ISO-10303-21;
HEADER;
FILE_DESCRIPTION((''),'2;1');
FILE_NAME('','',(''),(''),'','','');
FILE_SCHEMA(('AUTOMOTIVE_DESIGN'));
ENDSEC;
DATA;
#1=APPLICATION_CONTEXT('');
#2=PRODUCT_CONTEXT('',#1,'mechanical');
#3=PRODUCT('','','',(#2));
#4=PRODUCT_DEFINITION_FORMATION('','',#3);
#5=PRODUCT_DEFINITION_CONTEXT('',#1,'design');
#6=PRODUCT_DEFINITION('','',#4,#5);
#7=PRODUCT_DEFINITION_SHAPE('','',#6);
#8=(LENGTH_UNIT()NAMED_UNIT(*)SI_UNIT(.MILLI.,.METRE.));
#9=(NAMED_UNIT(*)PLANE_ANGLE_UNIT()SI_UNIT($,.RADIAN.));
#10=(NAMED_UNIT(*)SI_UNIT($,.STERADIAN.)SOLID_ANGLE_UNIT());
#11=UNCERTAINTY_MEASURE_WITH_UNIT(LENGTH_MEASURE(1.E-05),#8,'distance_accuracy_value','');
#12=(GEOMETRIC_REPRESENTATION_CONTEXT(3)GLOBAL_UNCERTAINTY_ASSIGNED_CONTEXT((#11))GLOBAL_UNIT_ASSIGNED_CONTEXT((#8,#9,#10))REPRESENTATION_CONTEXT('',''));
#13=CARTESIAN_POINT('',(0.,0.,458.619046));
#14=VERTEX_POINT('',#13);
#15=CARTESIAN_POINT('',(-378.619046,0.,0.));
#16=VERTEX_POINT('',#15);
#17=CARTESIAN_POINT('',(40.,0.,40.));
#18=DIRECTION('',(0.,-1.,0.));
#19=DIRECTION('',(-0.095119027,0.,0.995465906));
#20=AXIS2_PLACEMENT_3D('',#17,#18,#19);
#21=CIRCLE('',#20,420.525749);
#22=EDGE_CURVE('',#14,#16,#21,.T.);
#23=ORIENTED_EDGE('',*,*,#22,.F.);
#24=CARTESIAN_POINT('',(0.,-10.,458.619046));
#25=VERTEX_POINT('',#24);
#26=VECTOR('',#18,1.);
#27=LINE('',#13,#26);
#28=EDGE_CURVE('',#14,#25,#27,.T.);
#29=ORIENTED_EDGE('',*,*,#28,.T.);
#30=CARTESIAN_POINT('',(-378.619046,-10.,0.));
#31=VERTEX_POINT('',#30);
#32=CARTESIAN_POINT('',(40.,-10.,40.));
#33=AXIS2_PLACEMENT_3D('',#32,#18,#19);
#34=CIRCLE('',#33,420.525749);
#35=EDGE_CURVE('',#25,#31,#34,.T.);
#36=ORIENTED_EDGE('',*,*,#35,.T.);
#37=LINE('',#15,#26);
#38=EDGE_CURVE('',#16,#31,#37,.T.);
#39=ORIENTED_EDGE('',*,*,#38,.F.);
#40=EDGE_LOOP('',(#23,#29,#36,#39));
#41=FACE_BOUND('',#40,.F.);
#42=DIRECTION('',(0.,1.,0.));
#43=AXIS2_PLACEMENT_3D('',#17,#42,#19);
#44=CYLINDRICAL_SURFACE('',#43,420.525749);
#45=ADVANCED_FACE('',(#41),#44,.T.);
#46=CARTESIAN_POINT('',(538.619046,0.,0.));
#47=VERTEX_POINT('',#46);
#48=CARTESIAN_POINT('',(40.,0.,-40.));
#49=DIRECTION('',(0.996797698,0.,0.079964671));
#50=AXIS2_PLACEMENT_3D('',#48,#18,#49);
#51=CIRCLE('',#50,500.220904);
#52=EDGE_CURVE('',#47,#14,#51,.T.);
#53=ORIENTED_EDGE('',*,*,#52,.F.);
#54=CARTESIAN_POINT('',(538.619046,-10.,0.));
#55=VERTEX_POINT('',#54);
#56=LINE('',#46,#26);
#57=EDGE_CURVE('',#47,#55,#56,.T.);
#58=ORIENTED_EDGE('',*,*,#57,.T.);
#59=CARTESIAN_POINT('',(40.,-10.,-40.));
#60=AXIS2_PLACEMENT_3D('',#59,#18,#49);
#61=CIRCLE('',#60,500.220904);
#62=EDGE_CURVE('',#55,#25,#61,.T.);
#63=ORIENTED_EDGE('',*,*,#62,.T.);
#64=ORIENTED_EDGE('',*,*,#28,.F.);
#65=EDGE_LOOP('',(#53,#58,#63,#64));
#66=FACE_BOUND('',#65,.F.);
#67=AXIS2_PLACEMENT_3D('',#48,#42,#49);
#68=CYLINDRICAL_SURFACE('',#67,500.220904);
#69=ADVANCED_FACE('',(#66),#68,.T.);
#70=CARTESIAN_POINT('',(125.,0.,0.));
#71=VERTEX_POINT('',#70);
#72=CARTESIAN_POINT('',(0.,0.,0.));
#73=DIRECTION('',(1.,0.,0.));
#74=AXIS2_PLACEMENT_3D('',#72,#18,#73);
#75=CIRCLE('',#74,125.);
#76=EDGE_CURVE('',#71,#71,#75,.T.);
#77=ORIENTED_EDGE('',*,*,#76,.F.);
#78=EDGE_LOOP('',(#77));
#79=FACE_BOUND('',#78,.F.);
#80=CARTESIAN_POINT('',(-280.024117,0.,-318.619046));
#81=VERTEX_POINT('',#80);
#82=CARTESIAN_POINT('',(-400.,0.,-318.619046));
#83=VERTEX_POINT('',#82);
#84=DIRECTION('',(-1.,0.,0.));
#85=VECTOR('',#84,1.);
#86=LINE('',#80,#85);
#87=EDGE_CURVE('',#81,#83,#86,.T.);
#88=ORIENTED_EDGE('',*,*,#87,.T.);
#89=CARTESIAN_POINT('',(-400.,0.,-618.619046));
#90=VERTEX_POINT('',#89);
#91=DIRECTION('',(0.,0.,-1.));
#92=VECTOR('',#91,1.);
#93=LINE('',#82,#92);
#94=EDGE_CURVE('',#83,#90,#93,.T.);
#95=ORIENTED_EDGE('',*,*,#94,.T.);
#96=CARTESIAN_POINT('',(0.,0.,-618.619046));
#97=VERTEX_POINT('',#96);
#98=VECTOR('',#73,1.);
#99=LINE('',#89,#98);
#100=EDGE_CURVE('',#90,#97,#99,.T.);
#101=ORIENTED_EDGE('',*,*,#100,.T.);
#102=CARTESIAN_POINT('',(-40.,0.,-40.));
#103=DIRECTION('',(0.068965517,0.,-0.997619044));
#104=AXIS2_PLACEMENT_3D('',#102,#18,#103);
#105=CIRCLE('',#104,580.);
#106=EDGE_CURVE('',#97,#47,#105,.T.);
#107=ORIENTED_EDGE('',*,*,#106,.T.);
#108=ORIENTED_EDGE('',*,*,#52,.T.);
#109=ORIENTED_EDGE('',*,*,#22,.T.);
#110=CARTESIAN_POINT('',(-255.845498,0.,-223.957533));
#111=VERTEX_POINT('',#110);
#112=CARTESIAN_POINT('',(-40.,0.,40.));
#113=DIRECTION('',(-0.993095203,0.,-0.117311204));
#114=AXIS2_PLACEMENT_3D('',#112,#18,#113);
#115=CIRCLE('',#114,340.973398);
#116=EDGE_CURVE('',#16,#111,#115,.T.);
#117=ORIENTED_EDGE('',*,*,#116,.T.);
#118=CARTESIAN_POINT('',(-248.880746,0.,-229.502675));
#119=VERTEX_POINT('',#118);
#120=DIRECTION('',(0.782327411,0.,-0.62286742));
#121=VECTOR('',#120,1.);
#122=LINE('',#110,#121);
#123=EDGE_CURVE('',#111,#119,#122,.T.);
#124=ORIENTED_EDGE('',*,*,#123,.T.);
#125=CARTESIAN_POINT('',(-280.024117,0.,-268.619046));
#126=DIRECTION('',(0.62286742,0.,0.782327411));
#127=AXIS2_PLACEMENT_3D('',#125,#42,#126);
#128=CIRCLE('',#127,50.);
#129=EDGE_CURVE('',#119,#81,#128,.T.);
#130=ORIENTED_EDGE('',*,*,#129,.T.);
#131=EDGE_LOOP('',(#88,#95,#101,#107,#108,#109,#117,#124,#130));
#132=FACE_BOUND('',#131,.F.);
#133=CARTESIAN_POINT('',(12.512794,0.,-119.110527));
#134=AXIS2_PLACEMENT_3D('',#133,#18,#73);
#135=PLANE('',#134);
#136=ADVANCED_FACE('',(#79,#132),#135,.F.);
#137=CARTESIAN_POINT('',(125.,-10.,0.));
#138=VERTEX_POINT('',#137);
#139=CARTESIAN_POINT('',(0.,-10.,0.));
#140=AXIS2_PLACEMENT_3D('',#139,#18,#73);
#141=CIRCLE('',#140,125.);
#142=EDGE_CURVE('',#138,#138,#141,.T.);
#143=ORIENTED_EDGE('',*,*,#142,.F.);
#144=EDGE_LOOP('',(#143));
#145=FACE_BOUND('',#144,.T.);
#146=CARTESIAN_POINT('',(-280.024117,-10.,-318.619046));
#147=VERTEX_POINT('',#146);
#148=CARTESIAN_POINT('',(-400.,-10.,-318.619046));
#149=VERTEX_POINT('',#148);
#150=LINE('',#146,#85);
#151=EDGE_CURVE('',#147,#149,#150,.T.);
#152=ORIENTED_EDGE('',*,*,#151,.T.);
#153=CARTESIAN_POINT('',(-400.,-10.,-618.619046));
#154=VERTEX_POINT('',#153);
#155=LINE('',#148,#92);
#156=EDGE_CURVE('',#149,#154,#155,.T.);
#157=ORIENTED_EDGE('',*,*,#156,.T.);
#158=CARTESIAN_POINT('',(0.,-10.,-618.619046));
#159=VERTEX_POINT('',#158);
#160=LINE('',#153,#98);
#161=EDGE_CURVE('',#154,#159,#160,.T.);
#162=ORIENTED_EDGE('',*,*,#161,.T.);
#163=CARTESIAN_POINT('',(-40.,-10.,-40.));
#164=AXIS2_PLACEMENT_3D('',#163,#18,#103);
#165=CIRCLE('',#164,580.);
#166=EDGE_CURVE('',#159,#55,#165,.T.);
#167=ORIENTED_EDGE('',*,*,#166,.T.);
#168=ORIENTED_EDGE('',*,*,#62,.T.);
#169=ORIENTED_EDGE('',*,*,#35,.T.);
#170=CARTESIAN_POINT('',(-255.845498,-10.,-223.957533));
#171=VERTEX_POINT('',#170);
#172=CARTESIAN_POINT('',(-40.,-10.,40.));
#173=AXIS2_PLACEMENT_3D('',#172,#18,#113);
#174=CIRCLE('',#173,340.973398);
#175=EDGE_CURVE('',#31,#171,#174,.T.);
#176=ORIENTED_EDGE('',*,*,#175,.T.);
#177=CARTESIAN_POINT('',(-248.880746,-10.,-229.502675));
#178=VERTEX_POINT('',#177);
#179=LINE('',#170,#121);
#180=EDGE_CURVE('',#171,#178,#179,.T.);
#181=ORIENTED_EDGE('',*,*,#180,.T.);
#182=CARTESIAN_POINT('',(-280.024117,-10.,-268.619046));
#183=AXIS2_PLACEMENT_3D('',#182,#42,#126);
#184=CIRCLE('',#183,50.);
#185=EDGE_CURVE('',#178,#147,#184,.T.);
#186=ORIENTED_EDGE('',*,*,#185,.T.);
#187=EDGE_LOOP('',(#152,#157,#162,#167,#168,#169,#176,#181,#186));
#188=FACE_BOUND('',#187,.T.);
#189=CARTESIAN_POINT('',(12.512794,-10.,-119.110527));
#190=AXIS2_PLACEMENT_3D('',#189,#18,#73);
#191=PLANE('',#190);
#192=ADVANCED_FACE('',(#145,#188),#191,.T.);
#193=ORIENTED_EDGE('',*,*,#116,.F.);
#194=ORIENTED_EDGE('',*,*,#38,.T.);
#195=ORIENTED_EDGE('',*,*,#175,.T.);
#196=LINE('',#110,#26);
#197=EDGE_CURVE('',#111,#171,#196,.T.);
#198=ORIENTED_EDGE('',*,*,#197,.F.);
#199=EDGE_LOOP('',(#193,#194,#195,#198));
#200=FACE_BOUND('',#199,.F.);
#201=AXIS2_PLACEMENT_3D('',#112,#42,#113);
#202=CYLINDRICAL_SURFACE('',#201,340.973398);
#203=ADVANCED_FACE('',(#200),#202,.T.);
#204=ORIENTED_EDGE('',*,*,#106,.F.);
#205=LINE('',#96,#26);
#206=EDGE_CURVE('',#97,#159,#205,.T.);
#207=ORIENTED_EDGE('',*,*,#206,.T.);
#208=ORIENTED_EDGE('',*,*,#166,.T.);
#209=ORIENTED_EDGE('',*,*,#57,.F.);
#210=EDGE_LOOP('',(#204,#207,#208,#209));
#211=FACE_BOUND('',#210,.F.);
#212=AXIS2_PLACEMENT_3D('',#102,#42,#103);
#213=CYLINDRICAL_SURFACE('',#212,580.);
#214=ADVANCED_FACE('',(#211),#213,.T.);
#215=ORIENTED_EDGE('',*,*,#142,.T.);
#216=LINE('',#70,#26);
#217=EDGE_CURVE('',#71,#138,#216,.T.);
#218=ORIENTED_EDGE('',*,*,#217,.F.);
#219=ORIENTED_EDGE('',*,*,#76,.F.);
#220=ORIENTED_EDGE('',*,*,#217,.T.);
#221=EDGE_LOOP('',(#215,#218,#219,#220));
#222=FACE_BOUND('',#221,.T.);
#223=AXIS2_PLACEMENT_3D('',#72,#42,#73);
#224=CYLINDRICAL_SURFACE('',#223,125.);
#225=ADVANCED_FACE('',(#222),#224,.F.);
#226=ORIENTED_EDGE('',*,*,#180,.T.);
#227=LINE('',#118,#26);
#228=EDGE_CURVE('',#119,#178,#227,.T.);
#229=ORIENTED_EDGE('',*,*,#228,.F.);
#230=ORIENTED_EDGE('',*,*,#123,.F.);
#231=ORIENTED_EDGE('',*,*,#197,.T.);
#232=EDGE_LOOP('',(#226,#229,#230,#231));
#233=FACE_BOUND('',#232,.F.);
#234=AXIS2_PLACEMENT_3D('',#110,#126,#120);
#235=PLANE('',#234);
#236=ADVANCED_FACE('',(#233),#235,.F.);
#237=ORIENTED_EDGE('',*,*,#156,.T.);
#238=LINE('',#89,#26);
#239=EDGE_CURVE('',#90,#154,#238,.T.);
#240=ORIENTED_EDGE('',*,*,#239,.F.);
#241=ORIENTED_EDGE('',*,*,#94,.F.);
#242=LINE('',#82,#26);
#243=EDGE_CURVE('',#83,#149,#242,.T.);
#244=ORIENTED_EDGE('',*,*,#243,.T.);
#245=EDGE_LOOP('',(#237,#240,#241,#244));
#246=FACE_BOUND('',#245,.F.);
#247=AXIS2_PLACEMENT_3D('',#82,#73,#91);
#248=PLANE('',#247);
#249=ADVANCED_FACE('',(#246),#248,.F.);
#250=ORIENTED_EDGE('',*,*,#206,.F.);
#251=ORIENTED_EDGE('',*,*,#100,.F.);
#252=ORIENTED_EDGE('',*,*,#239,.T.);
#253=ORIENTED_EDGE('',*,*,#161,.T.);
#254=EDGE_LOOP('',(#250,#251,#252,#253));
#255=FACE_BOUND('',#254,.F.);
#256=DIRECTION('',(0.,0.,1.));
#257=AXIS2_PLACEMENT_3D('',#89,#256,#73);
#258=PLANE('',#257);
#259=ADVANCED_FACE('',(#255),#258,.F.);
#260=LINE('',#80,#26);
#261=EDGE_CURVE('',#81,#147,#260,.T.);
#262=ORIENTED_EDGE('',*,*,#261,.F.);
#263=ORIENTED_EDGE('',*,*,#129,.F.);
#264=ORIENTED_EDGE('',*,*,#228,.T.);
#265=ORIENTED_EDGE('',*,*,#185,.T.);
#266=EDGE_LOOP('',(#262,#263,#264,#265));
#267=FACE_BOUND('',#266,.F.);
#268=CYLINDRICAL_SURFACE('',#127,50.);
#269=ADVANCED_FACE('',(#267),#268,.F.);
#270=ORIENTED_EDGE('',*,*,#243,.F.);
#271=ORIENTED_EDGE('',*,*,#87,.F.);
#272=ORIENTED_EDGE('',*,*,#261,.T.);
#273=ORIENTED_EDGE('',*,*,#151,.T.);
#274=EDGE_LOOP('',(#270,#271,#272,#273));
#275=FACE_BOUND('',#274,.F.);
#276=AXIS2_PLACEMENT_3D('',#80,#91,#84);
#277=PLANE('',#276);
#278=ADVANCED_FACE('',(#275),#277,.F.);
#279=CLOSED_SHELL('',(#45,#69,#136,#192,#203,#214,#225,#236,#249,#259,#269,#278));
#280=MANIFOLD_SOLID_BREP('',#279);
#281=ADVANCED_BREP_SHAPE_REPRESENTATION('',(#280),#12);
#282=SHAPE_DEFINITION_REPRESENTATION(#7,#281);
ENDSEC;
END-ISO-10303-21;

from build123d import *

# Parameters (mm, degrees)
F0_R     = 125
F1_DEPTH = 10


# Not quite as in the source:
# - a feature names something its author has since deleted; it is built from what else it names


with BuildPart() as f1:
    # F0 (on Front) → F1 (new body)
    with BuildSketch(Plane.XZ):
        with BuildLine():
            ThreePointArc((0, -618.6190456596), (397.429722157, -420.8611796621), (538.6190456596, 0))
            ThreePointArc((538.6190456596, 0), (364.2926371672, 340.8611796621), (0, 458.6190456596))
            ThreePointArc((0, 458.6190456596), (-284.2926371672, 307.7240946723), (-378.6190456596, 0))
            ThreePointArc((-378.6190456596, 0), (-338.9932719851, -123.9081492515), (-255.845498181, -223.9575325662))
            Line((-255.845498181, -223.9575325662), (-248.8807463186, -229.5026751274))
            ThreePointArc((-248.8807463186, -229.5026751274), (-232.823383589, -285.1142187928), (-280.0241173048, -318.6190456596))
            Line((-280.0241173048, -318.6190456596), (-400, -318.6190456596))
            Line((-400, -318.6190456596), (-400, -618.6190456596))
            Line((-400, -618.6190456596), (0, -618.6190456596))
        make_face()
        Circle(F0_R, mode=Mode.SUBTRACT)
    extrude(amount=F1_DEPTH)


solid = f1.part
